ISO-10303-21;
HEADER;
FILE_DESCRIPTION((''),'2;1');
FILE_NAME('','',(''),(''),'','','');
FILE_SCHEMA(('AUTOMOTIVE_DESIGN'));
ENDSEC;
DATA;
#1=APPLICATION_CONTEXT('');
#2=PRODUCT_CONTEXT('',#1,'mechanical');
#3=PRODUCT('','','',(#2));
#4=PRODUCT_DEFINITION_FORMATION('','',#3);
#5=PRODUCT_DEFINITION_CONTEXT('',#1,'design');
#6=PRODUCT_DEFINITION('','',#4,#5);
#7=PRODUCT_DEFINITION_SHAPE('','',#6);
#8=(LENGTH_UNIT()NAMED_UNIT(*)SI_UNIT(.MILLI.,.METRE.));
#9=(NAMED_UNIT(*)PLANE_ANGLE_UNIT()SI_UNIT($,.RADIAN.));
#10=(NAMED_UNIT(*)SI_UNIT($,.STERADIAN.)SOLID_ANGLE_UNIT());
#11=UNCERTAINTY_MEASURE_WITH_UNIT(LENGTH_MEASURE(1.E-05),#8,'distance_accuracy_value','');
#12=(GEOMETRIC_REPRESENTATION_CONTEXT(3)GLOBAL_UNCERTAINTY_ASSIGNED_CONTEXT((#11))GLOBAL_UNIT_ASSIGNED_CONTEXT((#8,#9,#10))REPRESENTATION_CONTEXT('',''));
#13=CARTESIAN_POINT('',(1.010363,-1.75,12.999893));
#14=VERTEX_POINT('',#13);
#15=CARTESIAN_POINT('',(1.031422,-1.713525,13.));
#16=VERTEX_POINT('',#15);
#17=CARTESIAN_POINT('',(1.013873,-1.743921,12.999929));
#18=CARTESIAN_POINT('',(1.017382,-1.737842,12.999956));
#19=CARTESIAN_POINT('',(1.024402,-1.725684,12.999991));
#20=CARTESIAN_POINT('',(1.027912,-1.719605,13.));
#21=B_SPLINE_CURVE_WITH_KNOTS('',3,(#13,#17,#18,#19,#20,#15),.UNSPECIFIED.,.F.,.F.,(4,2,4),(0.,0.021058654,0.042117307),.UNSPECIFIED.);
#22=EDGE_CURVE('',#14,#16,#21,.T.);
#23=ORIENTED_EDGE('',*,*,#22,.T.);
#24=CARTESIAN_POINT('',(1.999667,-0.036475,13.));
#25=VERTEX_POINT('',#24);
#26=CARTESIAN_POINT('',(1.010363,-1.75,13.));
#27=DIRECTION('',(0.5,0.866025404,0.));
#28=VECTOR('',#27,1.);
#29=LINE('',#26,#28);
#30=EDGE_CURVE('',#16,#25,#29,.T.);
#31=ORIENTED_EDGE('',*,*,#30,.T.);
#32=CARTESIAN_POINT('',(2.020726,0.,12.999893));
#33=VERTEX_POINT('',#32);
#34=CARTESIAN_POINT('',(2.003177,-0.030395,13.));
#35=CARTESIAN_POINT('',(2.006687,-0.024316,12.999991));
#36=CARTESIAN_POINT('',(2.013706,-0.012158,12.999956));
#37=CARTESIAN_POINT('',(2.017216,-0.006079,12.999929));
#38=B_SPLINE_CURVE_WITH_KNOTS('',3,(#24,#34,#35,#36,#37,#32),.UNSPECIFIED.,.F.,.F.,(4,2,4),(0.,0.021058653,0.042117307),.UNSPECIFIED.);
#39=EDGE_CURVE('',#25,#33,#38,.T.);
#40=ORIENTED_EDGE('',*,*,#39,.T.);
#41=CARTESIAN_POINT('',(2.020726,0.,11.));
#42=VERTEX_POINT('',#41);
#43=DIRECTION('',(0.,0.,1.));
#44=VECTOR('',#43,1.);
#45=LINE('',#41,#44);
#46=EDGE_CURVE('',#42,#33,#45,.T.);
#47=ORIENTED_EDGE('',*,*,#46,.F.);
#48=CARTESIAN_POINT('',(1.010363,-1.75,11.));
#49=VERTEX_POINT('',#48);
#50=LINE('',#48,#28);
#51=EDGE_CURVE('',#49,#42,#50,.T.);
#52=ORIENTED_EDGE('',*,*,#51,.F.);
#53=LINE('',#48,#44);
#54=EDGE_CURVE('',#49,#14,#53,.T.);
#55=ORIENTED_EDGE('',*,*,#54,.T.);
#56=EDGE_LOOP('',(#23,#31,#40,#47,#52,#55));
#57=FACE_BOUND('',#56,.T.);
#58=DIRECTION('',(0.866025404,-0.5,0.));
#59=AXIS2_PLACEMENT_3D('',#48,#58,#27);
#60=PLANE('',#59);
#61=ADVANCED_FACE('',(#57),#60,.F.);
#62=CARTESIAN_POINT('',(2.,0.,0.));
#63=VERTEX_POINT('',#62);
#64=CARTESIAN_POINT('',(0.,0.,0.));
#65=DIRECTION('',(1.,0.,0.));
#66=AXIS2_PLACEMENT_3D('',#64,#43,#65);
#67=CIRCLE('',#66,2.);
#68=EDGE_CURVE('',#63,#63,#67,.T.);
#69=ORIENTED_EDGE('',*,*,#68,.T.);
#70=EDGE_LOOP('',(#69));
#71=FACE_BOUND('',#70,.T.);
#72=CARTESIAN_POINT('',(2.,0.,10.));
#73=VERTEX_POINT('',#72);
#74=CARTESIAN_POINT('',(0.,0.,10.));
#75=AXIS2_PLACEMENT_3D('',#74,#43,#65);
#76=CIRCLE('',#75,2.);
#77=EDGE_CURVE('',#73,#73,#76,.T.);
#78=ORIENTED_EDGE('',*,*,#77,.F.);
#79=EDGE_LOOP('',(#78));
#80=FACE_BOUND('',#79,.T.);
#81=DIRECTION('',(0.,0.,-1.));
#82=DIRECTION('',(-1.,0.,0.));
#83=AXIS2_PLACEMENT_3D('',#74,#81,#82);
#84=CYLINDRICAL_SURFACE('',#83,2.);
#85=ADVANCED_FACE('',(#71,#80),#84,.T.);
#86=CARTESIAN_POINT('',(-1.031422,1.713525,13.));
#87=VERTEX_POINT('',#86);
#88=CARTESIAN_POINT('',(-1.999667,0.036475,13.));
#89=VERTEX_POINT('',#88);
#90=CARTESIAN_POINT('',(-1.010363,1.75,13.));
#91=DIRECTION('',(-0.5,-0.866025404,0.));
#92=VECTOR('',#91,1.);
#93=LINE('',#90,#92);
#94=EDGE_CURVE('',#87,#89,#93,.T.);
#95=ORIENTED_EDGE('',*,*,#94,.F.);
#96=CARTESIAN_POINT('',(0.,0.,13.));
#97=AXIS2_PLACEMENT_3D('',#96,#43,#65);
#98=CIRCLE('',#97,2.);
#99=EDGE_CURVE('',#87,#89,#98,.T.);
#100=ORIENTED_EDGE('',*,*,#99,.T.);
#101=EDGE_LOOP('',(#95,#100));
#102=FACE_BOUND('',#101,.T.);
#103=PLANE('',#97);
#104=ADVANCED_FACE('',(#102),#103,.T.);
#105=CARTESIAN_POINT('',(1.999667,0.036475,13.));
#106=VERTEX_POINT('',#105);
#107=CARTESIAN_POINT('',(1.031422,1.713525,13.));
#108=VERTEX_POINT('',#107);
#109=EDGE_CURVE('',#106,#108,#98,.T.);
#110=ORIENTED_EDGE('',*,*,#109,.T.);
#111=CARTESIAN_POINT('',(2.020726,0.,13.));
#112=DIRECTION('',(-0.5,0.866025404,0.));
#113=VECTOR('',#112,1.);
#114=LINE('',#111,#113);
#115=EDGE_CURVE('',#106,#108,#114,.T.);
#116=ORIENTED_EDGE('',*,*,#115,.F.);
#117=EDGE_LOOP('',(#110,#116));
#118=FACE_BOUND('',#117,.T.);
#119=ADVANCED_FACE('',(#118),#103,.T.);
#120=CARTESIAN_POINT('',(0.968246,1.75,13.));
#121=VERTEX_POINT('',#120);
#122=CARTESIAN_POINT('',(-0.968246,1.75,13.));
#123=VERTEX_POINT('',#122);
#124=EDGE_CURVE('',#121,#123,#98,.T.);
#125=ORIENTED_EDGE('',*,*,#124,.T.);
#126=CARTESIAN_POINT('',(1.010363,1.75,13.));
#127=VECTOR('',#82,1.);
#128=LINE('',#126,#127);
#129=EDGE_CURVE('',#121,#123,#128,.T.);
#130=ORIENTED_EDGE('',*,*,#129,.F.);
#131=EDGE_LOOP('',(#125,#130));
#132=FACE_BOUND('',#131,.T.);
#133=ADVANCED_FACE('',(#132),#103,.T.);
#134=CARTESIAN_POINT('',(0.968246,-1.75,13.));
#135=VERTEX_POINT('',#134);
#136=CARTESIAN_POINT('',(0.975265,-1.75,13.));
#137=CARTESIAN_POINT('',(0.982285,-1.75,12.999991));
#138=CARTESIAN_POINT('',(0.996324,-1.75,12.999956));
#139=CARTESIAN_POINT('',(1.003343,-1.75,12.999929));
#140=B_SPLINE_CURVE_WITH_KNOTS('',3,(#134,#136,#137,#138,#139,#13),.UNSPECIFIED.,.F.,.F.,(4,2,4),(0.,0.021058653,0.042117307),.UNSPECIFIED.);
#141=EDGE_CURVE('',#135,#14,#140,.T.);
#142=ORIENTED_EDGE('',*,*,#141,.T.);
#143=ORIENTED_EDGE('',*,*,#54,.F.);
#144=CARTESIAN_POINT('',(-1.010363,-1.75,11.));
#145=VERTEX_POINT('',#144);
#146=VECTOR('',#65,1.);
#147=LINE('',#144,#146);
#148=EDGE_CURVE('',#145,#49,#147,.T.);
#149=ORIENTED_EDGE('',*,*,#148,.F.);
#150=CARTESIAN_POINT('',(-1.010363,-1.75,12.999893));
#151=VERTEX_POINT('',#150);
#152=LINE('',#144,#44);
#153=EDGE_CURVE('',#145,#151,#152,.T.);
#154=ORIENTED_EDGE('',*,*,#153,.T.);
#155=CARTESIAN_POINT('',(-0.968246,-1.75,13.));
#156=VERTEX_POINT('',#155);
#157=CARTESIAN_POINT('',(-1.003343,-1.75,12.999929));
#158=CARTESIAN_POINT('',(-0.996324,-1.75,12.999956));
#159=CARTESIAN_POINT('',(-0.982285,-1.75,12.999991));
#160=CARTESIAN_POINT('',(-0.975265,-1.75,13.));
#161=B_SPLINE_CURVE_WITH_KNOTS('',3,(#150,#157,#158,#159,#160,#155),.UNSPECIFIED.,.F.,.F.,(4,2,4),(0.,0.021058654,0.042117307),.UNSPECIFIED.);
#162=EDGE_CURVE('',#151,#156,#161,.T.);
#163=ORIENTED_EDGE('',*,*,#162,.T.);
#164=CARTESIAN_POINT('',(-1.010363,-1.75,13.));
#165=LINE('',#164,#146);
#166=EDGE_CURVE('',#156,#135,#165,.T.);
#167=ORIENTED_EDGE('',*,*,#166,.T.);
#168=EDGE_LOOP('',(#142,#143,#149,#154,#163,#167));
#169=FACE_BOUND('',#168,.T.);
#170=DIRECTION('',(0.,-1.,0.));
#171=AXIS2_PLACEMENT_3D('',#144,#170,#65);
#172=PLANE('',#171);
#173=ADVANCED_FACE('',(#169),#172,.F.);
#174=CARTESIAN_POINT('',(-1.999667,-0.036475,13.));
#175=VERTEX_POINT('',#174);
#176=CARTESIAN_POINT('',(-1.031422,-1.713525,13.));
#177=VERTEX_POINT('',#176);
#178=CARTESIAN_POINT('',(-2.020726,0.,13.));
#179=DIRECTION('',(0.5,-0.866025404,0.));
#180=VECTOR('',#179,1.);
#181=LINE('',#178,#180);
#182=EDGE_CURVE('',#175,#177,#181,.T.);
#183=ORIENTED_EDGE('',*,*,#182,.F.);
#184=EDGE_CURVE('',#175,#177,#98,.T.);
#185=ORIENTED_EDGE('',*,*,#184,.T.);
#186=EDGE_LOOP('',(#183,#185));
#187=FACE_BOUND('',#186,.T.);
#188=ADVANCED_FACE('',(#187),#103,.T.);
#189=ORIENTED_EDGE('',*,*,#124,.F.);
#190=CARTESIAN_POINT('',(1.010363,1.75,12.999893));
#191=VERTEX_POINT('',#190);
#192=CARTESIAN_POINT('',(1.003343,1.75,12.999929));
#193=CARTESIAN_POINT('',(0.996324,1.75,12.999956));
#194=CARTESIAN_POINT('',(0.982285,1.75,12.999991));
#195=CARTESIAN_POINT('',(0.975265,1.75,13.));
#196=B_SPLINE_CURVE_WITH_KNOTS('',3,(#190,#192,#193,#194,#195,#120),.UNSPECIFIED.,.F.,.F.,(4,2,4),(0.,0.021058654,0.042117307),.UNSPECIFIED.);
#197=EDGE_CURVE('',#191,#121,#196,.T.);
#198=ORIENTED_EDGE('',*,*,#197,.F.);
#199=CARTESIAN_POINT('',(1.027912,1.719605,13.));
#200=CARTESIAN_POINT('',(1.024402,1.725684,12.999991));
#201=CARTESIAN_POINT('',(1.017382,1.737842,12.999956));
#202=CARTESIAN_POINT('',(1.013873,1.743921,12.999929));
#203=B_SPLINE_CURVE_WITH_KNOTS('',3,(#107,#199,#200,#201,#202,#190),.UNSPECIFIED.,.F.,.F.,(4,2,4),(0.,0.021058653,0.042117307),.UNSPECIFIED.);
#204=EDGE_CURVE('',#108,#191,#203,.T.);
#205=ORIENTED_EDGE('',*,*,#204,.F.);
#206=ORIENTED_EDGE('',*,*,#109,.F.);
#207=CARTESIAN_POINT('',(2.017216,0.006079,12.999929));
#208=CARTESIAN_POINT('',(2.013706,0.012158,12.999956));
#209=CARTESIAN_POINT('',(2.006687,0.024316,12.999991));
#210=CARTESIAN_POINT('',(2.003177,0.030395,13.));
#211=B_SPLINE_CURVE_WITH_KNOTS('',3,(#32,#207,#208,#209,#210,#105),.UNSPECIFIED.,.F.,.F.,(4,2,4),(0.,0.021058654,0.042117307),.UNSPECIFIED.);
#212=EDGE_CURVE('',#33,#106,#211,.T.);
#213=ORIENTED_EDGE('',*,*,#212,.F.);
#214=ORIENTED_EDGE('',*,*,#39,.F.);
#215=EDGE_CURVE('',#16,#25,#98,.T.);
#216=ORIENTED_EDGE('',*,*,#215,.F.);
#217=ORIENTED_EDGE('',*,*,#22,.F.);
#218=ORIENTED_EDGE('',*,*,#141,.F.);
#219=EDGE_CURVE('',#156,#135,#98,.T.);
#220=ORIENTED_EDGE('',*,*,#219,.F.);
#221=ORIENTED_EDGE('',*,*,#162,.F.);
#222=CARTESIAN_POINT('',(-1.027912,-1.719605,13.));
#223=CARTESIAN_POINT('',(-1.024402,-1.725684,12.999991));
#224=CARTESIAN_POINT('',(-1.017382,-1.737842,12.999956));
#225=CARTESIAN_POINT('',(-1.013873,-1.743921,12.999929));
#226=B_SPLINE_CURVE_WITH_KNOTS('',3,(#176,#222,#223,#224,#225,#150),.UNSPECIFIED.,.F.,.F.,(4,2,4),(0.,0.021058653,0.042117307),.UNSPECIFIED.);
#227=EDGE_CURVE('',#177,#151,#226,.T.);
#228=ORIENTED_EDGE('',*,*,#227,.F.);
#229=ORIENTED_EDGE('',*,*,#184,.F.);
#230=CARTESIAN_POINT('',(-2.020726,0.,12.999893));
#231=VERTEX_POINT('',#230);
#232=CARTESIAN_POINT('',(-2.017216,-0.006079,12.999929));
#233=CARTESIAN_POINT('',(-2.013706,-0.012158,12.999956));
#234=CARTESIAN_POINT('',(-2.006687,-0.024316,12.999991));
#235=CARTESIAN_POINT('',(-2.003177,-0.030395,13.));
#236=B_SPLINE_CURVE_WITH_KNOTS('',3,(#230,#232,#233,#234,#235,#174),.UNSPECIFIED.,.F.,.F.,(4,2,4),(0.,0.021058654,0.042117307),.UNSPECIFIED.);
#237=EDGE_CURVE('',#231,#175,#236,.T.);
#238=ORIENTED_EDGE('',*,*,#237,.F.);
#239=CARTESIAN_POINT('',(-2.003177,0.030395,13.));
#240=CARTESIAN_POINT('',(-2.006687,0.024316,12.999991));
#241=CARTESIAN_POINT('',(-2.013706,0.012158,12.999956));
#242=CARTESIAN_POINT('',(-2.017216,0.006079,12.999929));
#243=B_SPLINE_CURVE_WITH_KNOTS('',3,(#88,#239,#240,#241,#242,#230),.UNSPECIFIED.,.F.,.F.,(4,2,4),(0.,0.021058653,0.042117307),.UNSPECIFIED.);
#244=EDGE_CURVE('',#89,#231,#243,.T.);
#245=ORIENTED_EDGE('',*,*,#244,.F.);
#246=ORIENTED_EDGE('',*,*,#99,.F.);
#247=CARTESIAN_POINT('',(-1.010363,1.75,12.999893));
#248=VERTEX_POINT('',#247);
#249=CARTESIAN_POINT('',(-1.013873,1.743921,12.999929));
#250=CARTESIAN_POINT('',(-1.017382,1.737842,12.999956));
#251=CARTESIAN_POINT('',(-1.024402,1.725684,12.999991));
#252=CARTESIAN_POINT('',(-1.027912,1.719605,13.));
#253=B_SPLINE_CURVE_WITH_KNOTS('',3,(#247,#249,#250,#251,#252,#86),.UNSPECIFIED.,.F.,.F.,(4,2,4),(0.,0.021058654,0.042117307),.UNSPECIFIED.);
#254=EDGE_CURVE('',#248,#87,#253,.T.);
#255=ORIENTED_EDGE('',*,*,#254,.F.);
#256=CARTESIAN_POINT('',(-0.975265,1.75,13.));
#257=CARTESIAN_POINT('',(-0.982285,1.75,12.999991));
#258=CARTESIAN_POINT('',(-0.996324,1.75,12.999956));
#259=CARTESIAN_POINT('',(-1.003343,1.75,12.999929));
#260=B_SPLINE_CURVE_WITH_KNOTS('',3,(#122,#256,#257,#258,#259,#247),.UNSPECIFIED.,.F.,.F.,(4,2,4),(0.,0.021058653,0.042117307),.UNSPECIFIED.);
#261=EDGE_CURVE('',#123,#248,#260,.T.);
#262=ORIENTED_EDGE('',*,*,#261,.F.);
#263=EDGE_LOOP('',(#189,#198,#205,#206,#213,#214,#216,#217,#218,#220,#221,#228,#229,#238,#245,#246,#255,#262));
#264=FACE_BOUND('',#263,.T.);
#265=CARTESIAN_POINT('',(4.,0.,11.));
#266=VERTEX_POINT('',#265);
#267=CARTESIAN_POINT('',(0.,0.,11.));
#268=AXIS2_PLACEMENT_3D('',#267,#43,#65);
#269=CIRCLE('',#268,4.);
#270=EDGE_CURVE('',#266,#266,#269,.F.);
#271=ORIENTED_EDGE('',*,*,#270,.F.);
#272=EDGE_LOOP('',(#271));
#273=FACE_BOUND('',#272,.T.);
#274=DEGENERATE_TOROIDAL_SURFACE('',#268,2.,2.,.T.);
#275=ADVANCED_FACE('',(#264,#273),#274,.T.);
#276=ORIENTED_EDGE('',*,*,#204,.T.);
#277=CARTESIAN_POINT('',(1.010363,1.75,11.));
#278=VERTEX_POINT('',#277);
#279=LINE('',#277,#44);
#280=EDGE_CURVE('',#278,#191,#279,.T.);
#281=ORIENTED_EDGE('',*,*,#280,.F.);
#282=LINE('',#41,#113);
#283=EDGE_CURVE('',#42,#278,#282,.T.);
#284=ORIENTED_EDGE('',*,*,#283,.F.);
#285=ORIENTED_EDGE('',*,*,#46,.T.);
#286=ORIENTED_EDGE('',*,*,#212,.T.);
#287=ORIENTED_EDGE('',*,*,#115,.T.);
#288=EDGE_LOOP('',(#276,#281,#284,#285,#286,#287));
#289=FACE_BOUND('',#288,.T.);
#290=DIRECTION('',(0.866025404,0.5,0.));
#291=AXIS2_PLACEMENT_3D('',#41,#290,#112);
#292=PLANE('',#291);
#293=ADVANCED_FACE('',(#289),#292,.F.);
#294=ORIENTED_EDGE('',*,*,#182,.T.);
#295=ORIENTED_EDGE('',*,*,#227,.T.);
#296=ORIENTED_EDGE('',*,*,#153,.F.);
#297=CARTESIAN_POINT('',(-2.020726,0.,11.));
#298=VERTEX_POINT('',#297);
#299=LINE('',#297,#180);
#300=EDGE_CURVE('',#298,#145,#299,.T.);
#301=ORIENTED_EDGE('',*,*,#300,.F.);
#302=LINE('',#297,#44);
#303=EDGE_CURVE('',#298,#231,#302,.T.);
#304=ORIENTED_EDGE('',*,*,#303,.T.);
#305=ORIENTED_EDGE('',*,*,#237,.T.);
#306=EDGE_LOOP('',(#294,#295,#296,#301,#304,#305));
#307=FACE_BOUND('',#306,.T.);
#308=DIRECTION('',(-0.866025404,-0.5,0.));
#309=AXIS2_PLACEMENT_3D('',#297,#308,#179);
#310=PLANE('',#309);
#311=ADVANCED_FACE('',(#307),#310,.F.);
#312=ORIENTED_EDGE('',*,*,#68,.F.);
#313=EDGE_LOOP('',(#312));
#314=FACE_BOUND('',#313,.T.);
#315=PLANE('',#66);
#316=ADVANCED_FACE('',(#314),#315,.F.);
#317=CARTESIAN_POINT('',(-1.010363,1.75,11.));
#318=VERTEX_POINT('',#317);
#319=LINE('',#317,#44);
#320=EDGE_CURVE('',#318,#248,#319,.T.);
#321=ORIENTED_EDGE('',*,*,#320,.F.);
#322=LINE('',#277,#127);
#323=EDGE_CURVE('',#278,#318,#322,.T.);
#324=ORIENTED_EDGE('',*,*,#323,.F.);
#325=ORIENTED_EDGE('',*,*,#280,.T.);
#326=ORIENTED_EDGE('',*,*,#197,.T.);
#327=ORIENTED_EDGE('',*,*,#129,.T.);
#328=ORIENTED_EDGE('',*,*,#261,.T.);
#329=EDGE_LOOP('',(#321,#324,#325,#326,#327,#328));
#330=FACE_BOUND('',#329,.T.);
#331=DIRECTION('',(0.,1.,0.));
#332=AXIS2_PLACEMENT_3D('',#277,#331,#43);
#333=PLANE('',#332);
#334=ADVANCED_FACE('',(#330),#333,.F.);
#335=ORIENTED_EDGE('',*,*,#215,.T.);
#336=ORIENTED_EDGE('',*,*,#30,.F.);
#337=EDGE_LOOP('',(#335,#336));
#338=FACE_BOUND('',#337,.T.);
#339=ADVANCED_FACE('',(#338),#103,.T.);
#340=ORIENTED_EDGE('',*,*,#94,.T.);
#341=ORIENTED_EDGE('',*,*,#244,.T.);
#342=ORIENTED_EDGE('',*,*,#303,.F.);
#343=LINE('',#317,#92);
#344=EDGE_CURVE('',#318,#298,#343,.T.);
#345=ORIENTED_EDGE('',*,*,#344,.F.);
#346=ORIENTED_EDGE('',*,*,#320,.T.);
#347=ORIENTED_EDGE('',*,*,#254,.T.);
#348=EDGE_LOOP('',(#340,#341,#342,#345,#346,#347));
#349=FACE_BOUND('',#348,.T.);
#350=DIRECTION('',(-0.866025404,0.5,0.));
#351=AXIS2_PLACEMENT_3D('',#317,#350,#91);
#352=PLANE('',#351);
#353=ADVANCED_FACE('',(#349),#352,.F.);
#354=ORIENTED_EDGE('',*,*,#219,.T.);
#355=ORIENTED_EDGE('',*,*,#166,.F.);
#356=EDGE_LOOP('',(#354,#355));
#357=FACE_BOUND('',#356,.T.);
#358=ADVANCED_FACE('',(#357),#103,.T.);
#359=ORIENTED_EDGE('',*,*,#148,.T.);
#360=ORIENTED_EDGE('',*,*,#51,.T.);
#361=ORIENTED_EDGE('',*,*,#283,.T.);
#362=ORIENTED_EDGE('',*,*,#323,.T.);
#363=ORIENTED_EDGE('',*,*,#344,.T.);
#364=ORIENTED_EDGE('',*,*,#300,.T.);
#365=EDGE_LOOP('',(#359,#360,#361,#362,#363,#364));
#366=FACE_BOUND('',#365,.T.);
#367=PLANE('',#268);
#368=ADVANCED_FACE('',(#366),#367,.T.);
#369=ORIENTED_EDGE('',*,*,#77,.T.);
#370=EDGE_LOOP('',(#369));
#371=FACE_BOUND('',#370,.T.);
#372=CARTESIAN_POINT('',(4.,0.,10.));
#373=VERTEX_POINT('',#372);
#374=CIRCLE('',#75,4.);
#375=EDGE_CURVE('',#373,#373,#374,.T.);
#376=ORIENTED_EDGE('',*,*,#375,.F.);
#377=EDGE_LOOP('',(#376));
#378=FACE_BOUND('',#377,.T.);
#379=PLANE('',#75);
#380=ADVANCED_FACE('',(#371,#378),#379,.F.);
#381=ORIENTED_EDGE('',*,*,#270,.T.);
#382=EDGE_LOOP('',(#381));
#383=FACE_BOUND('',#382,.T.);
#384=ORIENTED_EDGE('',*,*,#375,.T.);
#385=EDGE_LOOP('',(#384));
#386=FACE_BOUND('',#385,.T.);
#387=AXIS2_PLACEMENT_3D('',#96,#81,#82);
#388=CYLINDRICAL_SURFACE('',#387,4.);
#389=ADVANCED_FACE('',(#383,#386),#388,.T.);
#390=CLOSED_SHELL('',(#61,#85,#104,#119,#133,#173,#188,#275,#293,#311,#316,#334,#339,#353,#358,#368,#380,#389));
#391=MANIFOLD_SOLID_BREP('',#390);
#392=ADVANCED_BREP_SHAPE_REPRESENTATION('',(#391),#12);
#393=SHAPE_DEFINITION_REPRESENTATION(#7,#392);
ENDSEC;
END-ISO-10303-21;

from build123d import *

# Parameters (mm, degrees)
SKETCH_1_R          = 2
EXTRUDE_1_DEPTH     = 10
SKETCH_2_R          = 4
EXTRUDE_2_DEPTH     = 3
CUT_EXTRUDE_1_DEPTH = 2
FILLET_1_R          = 2


with BuildPart() as part:
    # 草图1 → 凸台-拉伸1 (new body)
    with BuildSketch(Plane.XY):
        Circle(SKETCH_1_R)
    extrude(amount=EXTRUDE_1_DEPTH)

    # 草图2 → 凸台-拉伸2 (add)
    with BuildSketch(Plane.XY.offset(10)):
        Circle(SKETCH_2_R)
    extrude(amount=EXTRUDE_2_DEPTH)

    # 草图3 → 切除-拉伸1 (cut)
    with BuildSketch(Plane.XY.offset(13)):
        Polygon((2.020725942, 0), (1.010362971, 1.75), (-1.010362971, 1.75), (-2.020725942, 0), (-1.010362971, -1.75), (1.010362971, -1.75), align=None)
    extrude(amount=-CUT_EXTRUDE_1_DEPTH, mode=Mode.SUBTRACT)

    # 圆角1
    # the kernel refuses this fillet: 2 mm, written as the material it takes off along each edge
    with BuildSketch(Plane(origin=(0, 0, 13), x_dir=(1, 0, 0), z_dir=(0, -1, 0))) as fillet_1_piece_1:
        with BuildLine():
            CenterArc((4 - FILLET_1_R, -FILLET_1_R), FILLET_1_R, 0, 90)
            Line((4 - FILLET_1_R, 0), (4, 0))
            Line((4, 0), (4, -FILLET_1_R))
        make_face()
    revolve(axis=Axis((0, 0, 13), (0, 0, 1)), mode=Mode.SUBTRACT)


solid = part.part
